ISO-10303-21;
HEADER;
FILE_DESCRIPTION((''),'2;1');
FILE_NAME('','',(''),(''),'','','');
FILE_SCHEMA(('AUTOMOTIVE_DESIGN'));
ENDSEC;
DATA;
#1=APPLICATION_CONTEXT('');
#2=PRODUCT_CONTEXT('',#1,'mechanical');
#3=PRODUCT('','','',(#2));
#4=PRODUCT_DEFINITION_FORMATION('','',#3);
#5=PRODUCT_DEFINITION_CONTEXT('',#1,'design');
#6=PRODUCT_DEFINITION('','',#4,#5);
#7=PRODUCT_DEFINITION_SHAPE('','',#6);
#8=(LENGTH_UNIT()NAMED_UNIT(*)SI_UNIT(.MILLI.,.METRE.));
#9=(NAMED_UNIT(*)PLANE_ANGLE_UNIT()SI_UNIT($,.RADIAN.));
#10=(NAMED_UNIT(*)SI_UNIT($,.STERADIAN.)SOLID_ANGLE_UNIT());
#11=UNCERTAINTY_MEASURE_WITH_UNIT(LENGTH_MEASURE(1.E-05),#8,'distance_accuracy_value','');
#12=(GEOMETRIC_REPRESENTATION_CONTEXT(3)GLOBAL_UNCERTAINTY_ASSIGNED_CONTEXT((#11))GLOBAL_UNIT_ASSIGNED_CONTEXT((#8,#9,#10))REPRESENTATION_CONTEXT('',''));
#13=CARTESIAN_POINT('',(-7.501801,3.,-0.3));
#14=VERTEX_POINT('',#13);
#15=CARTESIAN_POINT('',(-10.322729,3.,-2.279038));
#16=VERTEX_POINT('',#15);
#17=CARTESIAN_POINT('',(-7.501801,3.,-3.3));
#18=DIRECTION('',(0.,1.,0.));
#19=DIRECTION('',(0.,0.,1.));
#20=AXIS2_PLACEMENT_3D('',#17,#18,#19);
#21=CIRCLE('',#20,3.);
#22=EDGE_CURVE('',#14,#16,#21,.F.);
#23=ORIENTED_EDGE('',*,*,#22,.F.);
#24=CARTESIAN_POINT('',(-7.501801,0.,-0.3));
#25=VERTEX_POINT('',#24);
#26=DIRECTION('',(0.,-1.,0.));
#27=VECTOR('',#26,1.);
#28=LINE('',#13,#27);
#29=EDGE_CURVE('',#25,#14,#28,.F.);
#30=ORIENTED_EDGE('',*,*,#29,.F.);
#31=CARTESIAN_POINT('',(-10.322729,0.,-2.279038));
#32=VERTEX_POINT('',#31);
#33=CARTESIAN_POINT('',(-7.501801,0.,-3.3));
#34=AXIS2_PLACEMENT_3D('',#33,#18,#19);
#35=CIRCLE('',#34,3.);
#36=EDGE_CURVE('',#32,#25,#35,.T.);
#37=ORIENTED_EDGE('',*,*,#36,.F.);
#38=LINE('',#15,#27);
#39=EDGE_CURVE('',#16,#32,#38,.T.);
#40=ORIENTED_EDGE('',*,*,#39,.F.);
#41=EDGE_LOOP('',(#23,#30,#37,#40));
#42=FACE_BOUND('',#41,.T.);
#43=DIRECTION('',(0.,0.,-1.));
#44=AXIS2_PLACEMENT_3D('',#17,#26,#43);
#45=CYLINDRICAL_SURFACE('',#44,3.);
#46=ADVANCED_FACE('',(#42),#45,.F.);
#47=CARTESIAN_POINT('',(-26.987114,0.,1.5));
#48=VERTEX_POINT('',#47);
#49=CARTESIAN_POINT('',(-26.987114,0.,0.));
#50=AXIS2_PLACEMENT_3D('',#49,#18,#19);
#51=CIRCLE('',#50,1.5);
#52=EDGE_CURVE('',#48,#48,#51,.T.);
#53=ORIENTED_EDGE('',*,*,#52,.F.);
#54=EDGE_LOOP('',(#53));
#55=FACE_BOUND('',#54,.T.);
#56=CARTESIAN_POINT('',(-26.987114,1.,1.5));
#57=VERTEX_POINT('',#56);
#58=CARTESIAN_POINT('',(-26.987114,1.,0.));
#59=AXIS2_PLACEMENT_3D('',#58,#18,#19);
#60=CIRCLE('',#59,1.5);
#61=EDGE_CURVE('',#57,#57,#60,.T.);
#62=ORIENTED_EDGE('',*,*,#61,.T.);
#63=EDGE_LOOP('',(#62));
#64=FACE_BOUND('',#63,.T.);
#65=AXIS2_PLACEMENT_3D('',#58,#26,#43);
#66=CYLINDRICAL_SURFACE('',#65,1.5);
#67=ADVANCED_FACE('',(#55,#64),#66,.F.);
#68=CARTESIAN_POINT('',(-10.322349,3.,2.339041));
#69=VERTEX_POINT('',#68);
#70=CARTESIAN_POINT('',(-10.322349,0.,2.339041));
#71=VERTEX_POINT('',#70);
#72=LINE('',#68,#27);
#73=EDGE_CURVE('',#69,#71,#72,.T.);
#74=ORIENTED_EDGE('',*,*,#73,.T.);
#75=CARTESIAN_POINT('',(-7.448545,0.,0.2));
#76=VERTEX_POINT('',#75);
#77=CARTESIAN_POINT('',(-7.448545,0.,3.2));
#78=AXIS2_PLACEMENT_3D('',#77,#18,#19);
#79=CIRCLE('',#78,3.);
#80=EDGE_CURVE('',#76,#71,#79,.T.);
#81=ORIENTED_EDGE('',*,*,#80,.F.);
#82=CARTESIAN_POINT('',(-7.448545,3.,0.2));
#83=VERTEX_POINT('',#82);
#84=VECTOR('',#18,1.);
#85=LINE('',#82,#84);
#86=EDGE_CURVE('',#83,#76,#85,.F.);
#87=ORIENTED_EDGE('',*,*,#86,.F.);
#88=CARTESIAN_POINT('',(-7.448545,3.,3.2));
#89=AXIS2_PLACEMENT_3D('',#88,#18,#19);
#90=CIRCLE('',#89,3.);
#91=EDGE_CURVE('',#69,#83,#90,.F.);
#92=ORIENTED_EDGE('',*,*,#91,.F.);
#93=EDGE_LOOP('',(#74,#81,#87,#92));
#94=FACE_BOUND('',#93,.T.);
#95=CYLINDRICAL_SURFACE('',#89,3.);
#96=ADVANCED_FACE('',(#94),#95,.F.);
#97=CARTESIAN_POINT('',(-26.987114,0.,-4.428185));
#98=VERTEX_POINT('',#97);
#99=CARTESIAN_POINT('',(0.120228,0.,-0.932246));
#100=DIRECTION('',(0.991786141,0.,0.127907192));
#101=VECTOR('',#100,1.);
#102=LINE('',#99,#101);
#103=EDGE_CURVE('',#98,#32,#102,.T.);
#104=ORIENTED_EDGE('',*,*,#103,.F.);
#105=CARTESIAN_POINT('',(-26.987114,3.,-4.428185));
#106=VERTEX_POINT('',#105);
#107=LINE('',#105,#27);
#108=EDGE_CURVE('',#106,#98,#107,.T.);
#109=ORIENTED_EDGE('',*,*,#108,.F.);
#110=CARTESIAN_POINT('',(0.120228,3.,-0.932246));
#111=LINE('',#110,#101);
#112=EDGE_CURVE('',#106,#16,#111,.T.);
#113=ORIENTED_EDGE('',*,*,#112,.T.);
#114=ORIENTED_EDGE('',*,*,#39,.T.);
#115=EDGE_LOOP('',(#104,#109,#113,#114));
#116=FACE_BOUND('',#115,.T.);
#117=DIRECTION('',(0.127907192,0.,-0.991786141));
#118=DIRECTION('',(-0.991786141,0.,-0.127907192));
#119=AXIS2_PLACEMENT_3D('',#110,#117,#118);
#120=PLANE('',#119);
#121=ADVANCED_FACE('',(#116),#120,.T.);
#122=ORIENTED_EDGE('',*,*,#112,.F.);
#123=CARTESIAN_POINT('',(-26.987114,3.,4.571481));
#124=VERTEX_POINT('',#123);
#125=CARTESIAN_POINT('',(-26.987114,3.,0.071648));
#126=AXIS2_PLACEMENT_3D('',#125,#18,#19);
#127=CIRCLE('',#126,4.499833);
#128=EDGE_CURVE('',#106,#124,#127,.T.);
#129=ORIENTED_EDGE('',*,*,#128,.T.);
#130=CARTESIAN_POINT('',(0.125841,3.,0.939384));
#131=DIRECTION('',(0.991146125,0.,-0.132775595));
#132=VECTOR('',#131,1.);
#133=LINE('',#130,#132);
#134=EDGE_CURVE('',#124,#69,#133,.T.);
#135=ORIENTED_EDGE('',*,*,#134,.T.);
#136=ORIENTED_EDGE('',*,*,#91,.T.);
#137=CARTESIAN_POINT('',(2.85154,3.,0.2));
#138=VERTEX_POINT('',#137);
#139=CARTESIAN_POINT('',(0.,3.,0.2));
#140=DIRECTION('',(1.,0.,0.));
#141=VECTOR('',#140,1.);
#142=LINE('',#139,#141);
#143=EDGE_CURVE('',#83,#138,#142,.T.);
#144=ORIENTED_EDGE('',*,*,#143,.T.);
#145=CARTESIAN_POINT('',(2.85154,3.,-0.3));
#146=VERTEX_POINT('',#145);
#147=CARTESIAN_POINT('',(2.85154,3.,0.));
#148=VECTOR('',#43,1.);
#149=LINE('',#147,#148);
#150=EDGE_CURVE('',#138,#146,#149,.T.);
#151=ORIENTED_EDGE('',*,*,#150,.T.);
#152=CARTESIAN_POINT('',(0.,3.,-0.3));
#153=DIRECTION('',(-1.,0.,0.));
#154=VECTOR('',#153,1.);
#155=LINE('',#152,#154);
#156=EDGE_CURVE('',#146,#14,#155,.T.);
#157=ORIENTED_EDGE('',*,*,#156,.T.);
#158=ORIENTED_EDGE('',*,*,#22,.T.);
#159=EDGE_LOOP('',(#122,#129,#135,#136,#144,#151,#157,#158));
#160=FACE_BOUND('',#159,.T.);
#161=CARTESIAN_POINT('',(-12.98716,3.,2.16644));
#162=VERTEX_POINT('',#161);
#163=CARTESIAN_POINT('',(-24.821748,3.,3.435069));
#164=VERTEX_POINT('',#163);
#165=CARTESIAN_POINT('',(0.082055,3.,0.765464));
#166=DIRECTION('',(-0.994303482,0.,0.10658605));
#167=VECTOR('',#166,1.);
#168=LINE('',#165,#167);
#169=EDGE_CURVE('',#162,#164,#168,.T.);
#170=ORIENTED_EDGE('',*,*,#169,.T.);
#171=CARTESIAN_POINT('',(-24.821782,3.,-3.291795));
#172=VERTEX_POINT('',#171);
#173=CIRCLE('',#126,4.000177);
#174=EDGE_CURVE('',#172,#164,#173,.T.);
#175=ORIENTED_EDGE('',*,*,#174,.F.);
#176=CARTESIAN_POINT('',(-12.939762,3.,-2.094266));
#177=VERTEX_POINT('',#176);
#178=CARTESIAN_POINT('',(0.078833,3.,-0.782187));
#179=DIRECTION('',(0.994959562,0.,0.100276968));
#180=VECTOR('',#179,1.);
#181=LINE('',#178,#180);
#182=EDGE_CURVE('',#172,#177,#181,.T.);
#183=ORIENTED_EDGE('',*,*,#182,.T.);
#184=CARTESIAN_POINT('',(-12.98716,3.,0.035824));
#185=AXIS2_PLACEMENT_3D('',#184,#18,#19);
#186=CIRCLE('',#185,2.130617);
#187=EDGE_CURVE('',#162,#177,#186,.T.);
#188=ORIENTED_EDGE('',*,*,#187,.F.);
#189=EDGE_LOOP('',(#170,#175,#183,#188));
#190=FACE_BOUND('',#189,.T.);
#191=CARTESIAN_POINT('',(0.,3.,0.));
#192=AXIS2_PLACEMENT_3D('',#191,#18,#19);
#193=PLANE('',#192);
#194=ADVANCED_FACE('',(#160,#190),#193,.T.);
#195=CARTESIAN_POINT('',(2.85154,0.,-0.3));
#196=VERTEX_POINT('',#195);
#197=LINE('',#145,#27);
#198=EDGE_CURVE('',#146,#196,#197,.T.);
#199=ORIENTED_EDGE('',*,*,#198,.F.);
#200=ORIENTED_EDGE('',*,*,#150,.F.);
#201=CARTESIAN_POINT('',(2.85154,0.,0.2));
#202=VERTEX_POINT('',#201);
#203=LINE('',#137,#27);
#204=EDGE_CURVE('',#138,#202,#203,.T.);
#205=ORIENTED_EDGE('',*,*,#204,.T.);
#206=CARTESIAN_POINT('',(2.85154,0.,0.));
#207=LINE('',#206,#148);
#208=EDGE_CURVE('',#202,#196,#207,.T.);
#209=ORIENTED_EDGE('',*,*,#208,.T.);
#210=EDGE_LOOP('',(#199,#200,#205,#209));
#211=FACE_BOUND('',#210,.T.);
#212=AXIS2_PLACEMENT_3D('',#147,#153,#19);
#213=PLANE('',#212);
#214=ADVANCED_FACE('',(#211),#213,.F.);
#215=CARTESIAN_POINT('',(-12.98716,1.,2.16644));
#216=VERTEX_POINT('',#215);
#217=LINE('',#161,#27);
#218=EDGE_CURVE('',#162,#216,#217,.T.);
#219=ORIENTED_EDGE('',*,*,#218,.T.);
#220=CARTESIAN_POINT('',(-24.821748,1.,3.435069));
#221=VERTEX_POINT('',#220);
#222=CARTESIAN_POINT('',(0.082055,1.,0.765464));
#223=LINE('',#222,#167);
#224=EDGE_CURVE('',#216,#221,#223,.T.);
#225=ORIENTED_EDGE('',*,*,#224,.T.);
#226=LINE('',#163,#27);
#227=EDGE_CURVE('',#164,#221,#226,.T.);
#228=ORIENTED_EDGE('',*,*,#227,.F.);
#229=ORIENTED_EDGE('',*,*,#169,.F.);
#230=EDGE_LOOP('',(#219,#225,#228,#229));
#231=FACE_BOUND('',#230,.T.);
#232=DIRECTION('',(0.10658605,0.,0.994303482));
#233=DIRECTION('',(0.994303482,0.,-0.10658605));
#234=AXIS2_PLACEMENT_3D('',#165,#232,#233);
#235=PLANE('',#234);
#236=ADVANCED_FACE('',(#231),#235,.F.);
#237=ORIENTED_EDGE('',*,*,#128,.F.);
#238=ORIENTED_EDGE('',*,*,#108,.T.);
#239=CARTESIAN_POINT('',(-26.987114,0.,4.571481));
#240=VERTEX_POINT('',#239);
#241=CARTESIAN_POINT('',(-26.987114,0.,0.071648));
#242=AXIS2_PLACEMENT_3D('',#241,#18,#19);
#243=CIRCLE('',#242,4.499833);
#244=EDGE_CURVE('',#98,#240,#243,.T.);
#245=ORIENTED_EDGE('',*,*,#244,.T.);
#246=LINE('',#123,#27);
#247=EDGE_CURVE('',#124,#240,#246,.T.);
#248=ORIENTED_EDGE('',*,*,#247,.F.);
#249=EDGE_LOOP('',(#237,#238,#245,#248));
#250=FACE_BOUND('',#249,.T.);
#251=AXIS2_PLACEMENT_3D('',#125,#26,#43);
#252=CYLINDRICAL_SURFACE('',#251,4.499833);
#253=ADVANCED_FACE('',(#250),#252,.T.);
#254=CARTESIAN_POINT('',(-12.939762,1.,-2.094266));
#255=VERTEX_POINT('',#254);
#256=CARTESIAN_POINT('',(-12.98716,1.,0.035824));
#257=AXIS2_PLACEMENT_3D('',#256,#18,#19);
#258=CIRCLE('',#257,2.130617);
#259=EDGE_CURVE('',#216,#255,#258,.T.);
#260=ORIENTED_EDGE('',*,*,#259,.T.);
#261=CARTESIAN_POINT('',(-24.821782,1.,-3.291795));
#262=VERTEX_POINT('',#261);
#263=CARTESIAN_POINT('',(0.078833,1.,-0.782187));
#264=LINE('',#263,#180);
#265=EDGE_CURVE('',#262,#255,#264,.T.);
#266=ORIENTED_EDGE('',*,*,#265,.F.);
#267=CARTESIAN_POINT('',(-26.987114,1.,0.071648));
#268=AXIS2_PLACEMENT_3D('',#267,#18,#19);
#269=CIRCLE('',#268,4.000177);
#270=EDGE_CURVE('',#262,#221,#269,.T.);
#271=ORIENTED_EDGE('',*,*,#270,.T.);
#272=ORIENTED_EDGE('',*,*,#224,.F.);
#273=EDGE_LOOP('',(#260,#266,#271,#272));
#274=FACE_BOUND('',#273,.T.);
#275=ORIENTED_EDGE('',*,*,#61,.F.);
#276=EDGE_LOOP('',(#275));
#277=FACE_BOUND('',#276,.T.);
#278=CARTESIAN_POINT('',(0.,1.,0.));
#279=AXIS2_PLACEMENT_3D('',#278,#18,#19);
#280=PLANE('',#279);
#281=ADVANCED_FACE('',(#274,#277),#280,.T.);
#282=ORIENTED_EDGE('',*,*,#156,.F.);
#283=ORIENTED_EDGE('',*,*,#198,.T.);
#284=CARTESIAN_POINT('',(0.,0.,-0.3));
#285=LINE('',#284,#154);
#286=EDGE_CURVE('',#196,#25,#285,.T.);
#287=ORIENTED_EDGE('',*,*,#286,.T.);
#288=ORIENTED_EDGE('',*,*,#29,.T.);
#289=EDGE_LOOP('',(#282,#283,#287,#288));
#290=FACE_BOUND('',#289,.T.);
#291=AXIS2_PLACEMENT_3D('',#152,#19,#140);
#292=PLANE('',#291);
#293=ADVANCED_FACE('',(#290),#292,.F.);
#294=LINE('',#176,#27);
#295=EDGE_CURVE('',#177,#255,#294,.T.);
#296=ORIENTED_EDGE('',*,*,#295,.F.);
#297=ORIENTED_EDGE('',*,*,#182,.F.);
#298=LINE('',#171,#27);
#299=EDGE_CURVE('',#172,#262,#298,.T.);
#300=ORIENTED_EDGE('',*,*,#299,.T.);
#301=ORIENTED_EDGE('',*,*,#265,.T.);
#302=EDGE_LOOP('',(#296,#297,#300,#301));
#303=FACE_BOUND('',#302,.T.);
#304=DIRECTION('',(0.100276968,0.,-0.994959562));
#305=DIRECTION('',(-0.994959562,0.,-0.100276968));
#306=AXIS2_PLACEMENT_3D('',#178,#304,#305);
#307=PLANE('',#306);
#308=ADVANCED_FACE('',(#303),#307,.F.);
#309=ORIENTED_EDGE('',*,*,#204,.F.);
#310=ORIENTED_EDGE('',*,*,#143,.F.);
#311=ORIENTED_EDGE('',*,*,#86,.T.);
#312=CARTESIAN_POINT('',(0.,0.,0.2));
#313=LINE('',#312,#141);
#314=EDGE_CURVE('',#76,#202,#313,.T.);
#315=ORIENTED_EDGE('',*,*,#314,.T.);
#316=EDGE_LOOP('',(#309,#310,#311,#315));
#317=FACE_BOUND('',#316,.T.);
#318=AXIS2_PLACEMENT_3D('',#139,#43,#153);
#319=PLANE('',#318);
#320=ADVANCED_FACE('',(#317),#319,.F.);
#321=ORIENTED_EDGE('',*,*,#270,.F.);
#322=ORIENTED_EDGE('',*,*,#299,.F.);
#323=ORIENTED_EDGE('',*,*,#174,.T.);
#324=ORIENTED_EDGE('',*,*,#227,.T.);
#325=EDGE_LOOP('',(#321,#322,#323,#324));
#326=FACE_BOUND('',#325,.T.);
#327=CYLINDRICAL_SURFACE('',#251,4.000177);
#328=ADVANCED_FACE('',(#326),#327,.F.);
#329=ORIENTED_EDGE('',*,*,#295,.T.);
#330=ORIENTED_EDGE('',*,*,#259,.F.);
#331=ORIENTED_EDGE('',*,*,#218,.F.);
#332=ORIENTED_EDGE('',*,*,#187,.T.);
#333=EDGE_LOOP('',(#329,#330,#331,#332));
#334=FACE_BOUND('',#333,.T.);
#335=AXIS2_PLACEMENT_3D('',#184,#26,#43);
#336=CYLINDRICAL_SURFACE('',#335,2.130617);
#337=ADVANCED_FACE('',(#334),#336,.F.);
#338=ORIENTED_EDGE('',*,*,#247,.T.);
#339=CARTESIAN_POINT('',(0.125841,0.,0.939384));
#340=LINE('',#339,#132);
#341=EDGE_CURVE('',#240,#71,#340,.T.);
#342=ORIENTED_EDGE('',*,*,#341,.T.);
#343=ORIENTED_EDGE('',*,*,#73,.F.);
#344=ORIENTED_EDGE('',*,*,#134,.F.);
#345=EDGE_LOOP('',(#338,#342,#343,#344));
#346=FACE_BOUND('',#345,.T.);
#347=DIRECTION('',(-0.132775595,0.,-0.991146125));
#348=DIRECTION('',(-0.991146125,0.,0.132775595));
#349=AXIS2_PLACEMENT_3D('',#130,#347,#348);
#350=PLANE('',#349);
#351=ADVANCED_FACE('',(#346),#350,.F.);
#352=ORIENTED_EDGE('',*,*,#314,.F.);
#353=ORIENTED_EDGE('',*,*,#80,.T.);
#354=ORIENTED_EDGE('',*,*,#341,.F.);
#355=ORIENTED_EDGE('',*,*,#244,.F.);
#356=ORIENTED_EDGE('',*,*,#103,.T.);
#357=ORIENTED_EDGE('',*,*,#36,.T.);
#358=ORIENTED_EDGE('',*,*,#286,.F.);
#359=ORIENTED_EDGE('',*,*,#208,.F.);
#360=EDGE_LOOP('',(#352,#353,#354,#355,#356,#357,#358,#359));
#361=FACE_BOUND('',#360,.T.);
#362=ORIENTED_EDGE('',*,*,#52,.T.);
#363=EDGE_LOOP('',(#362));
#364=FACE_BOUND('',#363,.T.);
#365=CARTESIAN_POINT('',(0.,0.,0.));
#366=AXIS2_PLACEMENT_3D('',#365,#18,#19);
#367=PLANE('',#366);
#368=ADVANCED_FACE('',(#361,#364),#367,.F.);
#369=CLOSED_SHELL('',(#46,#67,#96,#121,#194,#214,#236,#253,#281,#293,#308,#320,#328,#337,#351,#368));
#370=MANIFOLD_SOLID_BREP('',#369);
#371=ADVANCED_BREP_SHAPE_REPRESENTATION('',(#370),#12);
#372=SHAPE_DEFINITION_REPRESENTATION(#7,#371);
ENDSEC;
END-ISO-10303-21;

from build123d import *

# Parameters (mm, degrees)
SKETCH2_R           = 1.5
BOSS_EXTRUDE1_DEPTH = 1
BOSS_EXTRUDE2_DEPTH = 3
FILLET1_R           = 3
FILLET2_R           = 3


with BuildPart() as part:
    # Sketch2 → Boss-Extrude1 (new body)
    with BuildSketch(Plane(origin=(0, 0, 0), x_dir=(1, 0, 0), z_dir=(0, 1, 0))):
        with BuildLine():
            Line((-12.939762178, 2.094266176), (-24.821781773, 3.29179515))
            ThreePointArc((-24.821781773, 3.29179515), (-30.987291256, -0.071668068), (-24.821747911, -3.435069212))
            Line((-24.821747911, -3.435069212), (-12.987160246, -2.166440487))
            ThreePointArc((-12.987160246, -2.166440487), (-10.8566751, -0.059524017), (-12.939762178, 2.094266176))
        make_face()
        with Locations(Location((-26.987114413, 0, 0), (0, 0, 270))):
            Circle(SKETCH2_R, mode=Mode.SUBTRACT)
    extrude(amount=BOSS_EXTRUDE1_DEPTH)

    # Sketch2<3> → Boss-Extrude2 (add)
    with BuildSketch(Plane(origin=(0, 0, 0), x_dir=(1, 0, 0), z_dir=(0, 1, 0))):
        with BuildLine():
            Line((-10.322349305, -2.339041202), (-10.322728968, -0.2))
            Line((-10.322728968, -0.2), (2.851540312, -0.2))
            Line((2.851540312, -0.2), (2.851540312, 0.3))
            Line((2.851540312, 0.3), (-10.322728968, 0.3))
            Line((-10.322728968, 0.3), (-10.322728968, 2.279037645))
            Line((-10.322728968, 2.279037645), (-26.987114411, 4.428185187))
            ThreePointArc((-26.987114411, 4.428185187), (-31.48694753, -0.071647931), (-26.987114411, -4.57148105))
            Line((-26.987114411, -4.57148105), (-10.322349305, -2.339041202))
        make_face()
        with BuildLine():
            ThreePointArc((-12.939762178, 2.094266176), (-10.8566751, -0.059524017), (-12.987160246, -2.166440487))
            Line((-12.987160246, -2.166440487), (-24.821747911, -3.435069212))
            ThreePointArc((-24.821747911, -3.435069212), (-30.987291256, -0.071668068), (-24.821781773, 3.29179515))
            Line((-24.821781773, 3.29179515), (-12.939762178, 2.094266176))
        make_face(mode=Mode.SUBTRACT)
    extrude(amount=BOSS_EXTRUDE2_DEPTH)

    # Fillet1
    # the kernel refuses this fillet: 3 mm, written as the material it adds along each edge
    with BuildSketch(Plane(origin=(-10.322728968, 0, -0.3), x_dir=(1, 0, 0), z_dir=(0, 1, 0))) as fillet1_piece_1:
        with BuildLine():
            CenterArc((2.820928193, 3), FILLET1_R, 199.896419226, 70.103580774)
            Line((0, 1.979037645), (-0.056418564, 1.958618398))
            ThreePointArc((-0.056418564, 1.958618398), (-0.06, 0.989518822), (-0.06, 0))
            Line((-0.06, 0), (0, -0.06))
            Line((0, -0.06), (2.820928193, -0.06))
            Line((2.820928193, -0.06), (2.820928193, 0))
        make_face()
    extrude(amount=3)

    # Fillet2
    # the kernel refuses this fillet: 3 mm, written as the material it adds along each edge
    with BuildSketch(Plane(origin=(-10.322728968, 0, 0.2), x_dir=(1, 0, 0), z_dir=(0, 1, 0))) as fillet2_piece_1:
        with BuildLine():
            CenterArc((2.874183753, -3), FILLET2_R, 90, 73.322386102)
            Line((0.000379663, -2.139041202), (-0.057096419, -2.121822026))
            ThreePointArc((-0.057096419, -2.121822026), (-0.059810168, -1.069531251), (-0.059999999, -1.065e-05))
            Line((-0.059999999, -1.065e-05), (0, 0.06))
            Line((0, 0.06), (2.874183753, 0.06))
            Line((2.874183753, 0.06), (2.874183753, 0))
        make_face()
    extrude(amount=3)


solid = part.part
